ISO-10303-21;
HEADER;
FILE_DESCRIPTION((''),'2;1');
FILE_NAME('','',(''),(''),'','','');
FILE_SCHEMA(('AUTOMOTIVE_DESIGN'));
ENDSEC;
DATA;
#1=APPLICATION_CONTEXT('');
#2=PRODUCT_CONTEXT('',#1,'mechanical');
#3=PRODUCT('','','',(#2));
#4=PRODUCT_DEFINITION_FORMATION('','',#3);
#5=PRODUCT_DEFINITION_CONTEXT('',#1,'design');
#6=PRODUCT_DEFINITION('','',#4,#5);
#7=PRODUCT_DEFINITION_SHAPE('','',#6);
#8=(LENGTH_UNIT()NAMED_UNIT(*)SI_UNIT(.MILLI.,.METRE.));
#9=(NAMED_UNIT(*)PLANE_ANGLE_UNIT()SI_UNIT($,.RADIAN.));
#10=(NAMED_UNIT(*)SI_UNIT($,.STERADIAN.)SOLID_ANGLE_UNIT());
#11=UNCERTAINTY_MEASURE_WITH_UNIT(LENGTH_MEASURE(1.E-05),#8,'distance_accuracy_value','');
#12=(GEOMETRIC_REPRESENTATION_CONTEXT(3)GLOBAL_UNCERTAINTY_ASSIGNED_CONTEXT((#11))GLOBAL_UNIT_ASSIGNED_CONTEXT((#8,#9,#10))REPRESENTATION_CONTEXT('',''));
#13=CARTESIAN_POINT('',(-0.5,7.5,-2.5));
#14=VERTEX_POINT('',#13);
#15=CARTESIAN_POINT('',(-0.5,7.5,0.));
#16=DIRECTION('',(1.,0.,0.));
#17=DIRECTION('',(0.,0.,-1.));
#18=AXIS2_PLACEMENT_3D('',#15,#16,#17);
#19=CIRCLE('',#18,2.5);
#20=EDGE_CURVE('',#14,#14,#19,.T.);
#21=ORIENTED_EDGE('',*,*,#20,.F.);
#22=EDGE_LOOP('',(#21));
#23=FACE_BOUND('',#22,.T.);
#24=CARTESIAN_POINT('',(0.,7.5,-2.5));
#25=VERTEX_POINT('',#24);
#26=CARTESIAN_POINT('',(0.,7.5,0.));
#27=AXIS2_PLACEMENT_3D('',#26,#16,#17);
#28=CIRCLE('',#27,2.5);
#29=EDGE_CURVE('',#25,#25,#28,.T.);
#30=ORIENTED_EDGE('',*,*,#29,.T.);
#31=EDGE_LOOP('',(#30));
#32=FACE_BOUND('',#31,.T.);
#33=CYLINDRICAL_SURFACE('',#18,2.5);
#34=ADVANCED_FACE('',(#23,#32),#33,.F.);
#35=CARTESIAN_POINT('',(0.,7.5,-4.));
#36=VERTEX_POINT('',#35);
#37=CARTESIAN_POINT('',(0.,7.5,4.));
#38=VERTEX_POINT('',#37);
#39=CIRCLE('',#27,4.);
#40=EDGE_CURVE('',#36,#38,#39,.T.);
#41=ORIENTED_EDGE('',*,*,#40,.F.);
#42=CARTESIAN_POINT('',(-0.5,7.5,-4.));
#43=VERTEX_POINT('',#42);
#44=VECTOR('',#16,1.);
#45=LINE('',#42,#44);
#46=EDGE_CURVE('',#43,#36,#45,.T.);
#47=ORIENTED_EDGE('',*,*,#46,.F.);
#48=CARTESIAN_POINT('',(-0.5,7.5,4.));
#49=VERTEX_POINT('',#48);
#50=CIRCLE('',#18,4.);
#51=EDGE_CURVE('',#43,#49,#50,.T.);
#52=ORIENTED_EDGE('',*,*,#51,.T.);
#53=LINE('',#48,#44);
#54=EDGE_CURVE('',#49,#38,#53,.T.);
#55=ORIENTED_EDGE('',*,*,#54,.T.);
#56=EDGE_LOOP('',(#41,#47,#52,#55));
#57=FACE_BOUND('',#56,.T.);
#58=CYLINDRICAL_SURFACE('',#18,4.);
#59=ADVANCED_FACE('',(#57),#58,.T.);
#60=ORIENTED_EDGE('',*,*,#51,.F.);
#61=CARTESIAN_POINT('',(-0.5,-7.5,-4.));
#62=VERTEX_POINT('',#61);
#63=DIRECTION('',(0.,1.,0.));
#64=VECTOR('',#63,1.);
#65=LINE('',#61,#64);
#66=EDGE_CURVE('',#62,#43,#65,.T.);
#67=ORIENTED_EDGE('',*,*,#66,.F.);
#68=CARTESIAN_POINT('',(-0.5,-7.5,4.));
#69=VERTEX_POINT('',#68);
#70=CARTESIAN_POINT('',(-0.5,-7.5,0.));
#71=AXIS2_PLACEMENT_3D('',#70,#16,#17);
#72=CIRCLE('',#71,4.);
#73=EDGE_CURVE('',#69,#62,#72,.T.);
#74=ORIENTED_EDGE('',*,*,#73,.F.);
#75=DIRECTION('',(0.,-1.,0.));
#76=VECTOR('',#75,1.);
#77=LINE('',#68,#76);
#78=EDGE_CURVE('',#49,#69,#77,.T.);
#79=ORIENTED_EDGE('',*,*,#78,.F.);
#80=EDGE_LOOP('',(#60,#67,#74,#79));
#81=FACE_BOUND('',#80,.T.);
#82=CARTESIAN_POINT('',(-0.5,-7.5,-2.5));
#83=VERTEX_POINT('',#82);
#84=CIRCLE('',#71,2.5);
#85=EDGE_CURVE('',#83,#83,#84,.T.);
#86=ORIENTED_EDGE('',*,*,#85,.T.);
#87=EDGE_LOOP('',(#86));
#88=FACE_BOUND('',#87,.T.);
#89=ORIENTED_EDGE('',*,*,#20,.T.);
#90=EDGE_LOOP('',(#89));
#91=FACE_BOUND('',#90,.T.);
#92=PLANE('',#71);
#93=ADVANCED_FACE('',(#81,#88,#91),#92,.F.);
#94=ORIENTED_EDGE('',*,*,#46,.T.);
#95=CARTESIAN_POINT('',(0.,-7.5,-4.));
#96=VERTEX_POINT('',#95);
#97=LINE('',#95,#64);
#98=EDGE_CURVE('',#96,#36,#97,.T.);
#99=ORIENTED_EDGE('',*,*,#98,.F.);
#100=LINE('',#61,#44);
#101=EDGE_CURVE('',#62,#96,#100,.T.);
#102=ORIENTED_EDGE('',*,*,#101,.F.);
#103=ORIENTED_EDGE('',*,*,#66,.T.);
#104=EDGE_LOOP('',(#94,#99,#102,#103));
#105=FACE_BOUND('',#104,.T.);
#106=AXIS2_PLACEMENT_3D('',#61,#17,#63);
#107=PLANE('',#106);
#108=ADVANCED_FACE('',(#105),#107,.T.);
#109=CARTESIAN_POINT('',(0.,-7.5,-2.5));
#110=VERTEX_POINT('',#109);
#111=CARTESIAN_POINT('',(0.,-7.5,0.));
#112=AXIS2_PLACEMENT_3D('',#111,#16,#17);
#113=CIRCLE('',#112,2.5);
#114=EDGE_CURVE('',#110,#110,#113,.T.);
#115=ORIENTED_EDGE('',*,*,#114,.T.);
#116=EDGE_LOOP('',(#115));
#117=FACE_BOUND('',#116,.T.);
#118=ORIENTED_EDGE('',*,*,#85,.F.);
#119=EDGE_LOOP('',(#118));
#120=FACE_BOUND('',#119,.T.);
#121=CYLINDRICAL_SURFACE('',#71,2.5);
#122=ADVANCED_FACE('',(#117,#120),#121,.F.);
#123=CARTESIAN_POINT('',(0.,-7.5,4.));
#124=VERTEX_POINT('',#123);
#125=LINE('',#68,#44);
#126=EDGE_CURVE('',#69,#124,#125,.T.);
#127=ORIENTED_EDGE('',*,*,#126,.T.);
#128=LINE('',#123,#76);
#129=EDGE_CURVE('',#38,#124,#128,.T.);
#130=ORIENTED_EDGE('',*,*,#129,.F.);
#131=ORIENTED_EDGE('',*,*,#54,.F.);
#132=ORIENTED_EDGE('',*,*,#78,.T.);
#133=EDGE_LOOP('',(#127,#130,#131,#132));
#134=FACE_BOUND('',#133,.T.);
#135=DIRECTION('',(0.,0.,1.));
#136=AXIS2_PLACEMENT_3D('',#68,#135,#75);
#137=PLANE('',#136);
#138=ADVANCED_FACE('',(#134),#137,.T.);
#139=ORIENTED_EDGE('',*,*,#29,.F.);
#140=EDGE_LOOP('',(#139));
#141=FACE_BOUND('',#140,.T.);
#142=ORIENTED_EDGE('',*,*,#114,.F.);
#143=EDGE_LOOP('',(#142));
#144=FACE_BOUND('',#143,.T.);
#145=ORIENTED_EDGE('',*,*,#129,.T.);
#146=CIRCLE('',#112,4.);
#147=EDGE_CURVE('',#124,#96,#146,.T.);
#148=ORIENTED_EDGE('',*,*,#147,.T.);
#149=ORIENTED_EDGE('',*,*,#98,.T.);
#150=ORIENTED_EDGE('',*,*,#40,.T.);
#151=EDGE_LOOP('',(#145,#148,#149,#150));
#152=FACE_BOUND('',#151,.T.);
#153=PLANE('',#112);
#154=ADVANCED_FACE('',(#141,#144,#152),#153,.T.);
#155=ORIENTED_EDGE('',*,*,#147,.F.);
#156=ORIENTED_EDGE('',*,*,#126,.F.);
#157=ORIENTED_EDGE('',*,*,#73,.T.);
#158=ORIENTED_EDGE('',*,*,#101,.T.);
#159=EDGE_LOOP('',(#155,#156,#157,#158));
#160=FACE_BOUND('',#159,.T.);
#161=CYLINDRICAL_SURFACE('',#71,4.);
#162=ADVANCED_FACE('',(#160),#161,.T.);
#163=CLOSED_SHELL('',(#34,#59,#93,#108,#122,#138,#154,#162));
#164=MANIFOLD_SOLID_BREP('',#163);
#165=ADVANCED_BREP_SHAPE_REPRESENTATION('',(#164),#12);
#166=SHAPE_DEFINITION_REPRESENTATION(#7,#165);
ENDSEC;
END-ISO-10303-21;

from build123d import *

# Parameters (mm, degrees)
SKETCH1_R          = 2.5
BASE_FLANGE1_DEPTH = 0.5


# Sheet-metal steps are written as plain solids
with BuildPart() as part:
    # Sketch1 → Base-Flange1 (new body)
    with BuildSketch(Plane(origin=(0, 0, 0), x_dir=(0, 0, -1), z_dir=(1, 0, 0))):
        with BuildLine():
            Line((-4, -7.5), (-4, 7.5))
            ThreePointArc((-4, 7.5), (0, 11.5), (4, 7.5))
            Line((4, 7.5), (4, -7.5))
            ThreePointArc((4, -7.5), (0, -11.5), (-4, -7.5))
        make_face()
        with Locations((0, 7.5)):
            Circle(SKETCH1_R, mode=Mode.SUBTRACT)
        with Locations((0, -7.5)):
            Circle(SKETCH1_R, mode=Mode.SUBTRACT)
    extrude(amount=-BASE_FLANGE1_DEPTH)


solid = part.part
